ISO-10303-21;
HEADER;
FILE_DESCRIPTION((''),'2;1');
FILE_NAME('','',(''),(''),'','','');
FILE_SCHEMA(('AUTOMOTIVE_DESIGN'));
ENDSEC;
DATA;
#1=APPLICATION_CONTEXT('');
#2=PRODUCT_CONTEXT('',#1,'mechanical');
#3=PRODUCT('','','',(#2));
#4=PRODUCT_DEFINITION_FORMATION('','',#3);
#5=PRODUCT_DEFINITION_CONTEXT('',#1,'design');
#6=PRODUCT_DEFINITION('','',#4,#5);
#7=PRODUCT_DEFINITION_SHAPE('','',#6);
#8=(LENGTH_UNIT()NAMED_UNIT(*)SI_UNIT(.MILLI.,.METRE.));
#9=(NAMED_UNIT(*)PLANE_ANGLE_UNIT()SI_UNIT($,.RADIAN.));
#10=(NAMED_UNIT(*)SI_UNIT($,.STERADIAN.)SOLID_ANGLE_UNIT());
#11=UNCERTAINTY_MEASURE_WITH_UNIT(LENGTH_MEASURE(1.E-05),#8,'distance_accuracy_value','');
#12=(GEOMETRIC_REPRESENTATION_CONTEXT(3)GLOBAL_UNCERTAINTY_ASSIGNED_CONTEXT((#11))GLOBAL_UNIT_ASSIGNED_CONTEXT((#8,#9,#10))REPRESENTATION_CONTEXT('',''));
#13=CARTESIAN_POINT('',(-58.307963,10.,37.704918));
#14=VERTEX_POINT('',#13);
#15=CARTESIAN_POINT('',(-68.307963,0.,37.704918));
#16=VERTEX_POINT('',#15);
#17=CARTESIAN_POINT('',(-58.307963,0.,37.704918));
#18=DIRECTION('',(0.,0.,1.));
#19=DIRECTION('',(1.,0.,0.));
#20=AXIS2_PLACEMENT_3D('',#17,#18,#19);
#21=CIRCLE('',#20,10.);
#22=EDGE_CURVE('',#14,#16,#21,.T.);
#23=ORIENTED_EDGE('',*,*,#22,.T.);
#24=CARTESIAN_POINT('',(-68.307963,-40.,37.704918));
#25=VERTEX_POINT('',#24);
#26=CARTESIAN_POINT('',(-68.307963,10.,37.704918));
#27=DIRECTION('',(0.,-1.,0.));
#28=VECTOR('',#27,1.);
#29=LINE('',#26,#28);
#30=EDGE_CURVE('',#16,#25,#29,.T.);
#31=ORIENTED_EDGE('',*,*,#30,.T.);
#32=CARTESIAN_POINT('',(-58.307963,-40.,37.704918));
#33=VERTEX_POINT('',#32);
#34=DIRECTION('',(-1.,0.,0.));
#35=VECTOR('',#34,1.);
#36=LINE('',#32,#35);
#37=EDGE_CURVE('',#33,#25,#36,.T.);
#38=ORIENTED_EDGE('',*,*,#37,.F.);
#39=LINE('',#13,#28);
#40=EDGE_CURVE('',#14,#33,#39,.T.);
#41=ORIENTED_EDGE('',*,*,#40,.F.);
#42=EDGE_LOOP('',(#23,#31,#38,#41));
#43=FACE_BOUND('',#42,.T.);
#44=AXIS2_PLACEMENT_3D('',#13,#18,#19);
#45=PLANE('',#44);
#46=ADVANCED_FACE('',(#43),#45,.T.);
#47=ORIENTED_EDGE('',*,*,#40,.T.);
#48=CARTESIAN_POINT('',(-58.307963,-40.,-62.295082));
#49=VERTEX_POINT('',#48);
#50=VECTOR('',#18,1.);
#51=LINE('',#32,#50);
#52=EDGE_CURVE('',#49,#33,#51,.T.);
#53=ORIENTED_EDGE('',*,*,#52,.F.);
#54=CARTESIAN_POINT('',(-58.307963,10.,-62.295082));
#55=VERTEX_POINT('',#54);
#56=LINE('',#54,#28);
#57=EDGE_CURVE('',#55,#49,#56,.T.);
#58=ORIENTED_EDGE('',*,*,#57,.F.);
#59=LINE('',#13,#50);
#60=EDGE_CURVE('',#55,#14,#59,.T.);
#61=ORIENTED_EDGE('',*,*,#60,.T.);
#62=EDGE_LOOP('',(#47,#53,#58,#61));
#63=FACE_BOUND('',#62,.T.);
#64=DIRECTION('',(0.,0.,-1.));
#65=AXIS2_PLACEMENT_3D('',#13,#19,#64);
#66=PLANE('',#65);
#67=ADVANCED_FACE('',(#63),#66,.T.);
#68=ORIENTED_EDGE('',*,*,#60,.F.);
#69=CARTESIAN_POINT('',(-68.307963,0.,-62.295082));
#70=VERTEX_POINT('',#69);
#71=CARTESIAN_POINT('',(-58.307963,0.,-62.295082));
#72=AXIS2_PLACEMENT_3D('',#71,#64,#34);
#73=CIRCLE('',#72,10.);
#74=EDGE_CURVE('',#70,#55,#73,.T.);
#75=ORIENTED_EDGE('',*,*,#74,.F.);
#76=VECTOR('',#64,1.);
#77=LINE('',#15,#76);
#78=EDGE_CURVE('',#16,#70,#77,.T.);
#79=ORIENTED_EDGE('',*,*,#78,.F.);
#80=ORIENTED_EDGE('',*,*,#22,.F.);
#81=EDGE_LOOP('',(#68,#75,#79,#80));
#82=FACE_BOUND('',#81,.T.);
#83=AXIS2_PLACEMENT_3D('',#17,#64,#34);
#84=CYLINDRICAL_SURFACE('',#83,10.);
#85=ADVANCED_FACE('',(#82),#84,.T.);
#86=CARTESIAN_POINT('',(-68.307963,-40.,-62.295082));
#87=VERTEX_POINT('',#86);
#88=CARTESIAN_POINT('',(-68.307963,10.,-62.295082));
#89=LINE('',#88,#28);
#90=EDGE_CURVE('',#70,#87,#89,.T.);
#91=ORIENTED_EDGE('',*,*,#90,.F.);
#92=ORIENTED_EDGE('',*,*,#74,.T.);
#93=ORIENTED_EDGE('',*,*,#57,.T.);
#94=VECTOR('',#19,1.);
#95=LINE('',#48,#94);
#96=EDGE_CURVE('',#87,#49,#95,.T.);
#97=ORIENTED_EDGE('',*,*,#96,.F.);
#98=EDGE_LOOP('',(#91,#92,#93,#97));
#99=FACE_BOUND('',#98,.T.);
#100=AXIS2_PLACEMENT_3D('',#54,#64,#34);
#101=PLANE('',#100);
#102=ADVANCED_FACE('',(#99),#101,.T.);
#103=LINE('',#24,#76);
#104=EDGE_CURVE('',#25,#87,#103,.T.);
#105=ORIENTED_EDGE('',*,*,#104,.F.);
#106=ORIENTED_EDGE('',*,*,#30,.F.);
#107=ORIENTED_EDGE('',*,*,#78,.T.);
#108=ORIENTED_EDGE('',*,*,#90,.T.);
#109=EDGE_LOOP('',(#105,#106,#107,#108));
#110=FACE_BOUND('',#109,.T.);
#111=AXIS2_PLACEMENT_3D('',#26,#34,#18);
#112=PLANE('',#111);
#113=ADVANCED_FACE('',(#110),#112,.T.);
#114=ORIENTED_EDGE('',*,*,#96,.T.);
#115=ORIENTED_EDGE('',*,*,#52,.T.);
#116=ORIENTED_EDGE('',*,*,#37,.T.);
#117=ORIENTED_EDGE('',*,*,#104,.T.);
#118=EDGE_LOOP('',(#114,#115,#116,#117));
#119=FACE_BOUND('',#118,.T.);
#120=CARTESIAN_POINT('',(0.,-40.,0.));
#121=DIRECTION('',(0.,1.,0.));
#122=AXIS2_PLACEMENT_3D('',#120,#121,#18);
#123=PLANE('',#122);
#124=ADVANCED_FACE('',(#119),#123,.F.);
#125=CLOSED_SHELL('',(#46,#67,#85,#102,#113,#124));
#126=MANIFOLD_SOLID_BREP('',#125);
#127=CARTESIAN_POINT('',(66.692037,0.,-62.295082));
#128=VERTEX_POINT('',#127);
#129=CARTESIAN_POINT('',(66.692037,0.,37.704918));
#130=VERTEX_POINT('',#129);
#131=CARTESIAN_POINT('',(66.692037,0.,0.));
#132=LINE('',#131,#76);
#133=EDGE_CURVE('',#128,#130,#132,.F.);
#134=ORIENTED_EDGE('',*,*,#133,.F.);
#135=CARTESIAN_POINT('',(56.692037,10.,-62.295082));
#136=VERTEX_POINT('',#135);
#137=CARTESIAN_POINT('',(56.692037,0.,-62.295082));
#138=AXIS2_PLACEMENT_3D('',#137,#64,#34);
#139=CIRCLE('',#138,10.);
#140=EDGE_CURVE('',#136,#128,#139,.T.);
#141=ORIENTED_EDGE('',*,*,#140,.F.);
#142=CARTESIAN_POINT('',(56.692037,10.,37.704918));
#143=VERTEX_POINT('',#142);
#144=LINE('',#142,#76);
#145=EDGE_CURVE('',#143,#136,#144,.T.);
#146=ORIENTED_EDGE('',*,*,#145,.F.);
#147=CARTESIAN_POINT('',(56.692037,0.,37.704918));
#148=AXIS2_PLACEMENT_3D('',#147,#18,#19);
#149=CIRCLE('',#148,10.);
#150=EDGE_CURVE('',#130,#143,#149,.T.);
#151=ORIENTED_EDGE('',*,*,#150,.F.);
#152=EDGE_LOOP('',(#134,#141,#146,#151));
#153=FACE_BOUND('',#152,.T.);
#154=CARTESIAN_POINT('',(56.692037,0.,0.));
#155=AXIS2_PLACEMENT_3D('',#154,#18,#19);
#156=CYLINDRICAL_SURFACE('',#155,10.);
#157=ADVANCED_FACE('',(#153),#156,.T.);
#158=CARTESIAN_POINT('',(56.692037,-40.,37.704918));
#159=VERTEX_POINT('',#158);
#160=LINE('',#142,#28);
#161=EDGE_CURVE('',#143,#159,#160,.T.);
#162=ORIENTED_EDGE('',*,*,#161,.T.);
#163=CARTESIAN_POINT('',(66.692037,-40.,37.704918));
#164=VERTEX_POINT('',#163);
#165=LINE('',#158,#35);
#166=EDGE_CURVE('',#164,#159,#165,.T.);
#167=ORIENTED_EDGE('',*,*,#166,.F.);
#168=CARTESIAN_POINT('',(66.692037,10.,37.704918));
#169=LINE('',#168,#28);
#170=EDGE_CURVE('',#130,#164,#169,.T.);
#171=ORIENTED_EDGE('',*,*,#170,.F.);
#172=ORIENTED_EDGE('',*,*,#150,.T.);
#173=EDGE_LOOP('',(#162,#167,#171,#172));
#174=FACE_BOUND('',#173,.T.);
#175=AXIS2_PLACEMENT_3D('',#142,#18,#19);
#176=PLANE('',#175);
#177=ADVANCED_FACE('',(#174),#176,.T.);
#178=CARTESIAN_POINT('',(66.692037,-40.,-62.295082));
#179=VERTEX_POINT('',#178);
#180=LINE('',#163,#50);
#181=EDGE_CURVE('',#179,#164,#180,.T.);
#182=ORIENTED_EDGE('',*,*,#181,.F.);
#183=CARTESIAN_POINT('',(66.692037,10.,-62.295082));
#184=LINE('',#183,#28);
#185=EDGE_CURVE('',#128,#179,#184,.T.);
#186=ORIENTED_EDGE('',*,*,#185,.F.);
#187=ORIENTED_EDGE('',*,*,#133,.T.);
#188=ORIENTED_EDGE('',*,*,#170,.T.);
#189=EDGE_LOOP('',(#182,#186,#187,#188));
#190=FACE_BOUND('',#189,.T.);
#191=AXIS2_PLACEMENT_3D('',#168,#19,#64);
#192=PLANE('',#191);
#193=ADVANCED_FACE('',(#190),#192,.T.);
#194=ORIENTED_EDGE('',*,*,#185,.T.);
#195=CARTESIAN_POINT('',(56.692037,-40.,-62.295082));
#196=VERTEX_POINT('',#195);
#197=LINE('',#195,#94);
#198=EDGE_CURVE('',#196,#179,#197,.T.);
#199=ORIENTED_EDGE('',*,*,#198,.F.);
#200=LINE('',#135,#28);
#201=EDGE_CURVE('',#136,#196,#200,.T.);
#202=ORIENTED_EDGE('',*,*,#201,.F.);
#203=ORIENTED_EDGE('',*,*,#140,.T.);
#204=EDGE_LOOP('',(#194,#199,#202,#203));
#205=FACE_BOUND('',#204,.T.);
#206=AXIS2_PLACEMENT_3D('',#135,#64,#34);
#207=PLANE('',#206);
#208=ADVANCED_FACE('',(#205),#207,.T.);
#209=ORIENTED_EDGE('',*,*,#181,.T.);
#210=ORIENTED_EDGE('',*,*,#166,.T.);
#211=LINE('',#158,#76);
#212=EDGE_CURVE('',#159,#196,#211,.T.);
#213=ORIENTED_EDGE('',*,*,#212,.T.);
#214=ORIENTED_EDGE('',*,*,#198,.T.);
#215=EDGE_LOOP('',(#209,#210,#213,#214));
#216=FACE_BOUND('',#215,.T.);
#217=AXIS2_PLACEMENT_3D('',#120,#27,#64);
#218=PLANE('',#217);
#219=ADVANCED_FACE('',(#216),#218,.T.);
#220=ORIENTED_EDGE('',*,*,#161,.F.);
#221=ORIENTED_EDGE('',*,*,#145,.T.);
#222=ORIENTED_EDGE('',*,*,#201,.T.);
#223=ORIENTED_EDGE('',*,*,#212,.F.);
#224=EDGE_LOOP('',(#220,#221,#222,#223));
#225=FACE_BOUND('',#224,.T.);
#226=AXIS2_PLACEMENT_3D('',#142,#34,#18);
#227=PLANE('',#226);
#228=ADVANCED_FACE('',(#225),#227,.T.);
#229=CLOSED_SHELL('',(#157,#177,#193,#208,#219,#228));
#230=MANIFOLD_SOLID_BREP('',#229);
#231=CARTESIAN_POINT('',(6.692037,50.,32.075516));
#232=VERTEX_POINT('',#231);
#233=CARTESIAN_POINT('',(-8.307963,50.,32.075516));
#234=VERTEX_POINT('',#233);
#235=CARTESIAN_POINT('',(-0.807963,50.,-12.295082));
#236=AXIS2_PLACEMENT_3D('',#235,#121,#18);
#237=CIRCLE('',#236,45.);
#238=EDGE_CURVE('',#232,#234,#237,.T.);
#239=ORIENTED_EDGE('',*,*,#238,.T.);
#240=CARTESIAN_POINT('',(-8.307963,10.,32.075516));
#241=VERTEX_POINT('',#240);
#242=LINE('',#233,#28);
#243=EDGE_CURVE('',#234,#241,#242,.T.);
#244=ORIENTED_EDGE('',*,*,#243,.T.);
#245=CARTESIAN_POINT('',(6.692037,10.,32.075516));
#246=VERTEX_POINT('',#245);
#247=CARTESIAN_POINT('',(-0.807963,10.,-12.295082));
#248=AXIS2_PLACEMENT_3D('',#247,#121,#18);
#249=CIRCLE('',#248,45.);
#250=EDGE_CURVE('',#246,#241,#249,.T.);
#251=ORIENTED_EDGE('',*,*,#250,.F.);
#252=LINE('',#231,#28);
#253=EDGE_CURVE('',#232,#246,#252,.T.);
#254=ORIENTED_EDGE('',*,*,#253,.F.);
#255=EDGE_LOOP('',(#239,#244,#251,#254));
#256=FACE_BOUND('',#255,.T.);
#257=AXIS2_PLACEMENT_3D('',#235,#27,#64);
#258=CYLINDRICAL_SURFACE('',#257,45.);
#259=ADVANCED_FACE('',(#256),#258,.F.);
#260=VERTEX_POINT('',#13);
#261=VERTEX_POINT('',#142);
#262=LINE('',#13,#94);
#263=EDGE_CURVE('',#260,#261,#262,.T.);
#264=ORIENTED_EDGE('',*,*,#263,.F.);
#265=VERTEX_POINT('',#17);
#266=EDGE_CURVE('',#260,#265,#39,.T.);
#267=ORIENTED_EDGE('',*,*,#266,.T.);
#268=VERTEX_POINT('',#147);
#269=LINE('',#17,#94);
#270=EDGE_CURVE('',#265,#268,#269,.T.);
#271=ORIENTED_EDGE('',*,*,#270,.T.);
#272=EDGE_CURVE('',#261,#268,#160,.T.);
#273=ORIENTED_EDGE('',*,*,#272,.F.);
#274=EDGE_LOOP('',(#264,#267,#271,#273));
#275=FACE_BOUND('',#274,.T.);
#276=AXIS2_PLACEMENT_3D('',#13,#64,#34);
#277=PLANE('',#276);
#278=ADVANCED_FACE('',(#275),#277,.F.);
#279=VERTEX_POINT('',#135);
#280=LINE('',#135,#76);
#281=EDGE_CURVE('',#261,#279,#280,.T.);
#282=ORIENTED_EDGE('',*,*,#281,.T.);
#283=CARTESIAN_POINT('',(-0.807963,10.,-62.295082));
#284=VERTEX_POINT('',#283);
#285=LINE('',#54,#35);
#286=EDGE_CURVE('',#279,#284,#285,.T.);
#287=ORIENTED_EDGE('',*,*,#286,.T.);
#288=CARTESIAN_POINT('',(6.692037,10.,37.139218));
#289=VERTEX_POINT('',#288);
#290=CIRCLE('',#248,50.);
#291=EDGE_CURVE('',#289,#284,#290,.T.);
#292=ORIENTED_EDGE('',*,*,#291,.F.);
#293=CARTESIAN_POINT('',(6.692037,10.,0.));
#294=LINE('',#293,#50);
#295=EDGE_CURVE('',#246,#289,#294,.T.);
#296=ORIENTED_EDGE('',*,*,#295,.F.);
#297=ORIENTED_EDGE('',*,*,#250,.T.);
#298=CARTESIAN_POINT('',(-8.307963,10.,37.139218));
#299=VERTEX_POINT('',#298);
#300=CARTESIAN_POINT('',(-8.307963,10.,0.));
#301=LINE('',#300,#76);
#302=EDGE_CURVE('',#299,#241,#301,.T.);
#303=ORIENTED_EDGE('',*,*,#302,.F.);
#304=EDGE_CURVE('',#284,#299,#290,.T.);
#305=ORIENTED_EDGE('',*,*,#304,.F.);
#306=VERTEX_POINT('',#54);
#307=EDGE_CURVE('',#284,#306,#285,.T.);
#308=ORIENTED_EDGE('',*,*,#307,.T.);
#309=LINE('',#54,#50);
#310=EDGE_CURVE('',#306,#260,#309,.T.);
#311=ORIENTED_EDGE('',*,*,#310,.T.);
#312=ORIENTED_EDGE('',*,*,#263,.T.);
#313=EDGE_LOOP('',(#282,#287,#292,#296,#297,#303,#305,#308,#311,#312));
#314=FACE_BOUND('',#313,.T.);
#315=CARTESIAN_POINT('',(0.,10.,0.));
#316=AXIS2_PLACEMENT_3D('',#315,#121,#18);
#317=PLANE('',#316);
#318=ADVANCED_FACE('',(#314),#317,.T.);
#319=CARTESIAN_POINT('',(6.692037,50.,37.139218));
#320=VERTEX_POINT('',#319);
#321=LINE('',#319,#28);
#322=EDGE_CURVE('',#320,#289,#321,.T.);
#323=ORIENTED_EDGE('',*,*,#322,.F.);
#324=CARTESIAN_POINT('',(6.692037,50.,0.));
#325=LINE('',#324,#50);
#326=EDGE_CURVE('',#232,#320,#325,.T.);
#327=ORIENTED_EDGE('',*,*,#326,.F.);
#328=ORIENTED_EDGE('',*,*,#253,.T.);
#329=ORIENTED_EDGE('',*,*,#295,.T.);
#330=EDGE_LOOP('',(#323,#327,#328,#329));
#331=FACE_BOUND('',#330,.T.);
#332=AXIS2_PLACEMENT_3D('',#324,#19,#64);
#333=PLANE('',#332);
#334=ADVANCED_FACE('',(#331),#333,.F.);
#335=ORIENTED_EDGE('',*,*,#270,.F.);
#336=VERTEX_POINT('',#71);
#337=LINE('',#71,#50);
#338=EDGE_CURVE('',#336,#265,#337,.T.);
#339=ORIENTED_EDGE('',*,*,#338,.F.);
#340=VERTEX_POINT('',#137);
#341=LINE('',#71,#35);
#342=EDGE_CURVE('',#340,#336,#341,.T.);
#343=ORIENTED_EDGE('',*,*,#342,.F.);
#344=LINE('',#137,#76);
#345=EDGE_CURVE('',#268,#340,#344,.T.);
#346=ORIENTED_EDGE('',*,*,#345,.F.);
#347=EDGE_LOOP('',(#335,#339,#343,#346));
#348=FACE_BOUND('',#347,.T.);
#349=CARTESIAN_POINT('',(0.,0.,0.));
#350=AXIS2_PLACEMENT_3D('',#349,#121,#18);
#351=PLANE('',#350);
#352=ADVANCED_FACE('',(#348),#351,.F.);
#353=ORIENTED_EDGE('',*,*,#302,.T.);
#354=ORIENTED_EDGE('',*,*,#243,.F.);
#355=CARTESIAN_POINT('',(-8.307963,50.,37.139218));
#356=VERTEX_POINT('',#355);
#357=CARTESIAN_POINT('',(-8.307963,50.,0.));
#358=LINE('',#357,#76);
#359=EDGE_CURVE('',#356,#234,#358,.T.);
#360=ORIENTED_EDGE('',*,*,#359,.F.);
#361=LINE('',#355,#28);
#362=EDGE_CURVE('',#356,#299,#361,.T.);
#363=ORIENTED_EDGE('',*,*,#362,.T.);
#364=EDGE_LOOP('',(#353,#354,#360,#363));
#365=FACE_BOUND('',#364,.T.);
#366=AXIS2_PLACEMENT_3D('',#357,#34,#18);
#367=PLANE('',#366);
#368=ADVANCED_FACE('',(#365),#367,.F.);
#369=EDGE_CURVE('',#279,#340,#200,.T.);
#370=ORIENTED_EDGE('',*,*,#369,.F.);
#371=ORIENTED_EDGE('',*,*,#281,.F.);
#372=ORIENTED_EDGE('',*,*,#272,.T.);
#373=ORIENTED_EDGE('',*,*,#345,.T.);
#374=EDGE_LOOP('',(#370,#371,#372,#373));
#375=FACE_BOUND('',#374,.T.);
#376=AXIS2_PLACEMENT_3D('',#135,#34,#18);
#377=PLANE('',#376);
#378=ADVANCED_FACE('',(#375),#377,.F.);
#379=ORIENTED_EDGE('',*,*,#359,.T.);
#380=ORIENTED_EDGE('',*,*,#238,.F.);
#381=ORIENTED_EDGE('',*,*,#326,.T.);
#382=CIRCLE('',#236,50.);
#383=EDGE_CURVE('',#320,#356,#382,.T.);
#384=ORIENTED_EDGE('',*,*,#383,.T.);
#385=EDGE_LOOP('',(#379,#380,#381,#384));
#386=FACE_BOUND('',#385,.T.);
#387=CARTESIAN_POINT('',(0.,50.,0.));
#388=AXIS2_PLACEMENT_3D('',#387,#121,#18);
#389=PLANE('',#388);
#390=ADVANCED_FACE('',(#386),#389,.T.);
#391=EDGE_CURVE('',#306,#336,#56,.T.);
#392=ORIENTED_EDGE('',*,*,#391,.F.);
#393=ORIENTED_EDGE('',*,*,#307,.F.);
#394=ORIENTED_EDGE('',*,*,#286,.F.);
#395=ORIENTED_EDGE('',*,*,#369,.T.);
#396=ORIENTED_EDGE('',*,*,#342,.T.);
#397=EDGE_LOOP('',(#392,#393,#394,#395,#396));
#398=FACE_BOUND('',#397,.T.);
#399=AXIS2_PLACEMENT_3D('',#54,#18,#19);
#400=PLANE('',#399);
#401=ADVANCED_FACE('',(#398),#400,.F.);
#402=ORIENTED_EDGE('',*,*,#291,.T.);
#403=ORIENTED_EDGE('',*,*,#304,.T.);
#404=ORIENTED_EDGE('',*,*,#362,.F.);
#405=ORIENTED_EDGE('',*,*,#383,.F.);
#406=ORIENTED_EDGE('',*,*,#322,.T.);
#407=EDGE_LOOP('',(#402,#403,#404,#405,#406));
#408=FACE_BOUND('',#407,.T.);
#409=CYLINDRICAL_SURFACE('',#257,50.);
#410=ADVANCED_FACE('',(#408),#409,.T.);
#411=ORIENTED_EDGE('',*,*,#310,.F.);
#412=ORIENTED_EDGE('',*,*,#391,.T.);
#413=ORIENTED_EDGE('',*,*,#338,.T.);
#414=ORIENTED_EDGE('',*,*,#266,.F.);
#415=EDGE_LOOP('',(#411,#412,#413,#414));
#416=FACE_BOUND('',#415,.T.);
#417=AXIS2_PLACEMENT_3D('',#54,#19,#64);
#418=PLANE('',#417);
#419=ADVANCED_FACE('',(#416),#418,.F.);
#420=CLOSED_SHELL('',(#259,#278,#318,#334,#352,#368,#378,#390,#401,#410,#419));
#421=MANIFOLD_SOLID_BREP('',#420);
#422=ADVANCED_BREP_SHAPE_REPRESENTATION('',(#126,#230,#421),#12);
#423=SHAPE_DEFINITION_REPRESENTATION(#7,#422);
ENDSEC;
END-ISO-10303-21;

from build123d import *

# Parameters (mm, degrees)
SOCLE_W                                        = 115
SOCLE_H                                        = 100
EXTRUSION_DU_SOCLE_DEPTH                       = 10
EXTRUSION_DES_FIXATIONS_LAT_RALES_DEPTH        = 40
EXTRUSION_DES_FIXATIONS_LAT_RALES_DEPTH_BACK   = 10
FIXATIONS_LAT_RALES_W                          = 10
FIXATIONS_LAT_RALES_H                          = 100
EXTRUSION_DES_FIXATIONS_LAT_RALES_2_DEPTH      = 40
EXTRUSION_DES_FIXATIONS_LAT_RALES_2_DEPTH_BACK = 10
CONG_FIXATION_GAUCHE_R                         = 10
CONG_FIXATION_DROITE_R                         = 10
EXTRUSION_FIXATION_TASSE_DEPTH                 = 40


with BuildPart() as part:
    # socle → extrusion du socle (new body)
    with BuildSketch(Plane(origin=(0, 0, 0), x_dir=(1, 0, 0), z_dir=(0, 1, 0))):
        with Locations((-0.807962529, 12.295081967)):
            Rectangle(SOCLE_W, SOCLE_H)
    extrude(amount=EXTRUSION_DU_SOCLE_DEPTH)

    # socle tasse → extrusion fixation tasse (add)
    with BuildSketch(Plane(origin=(0, 10, 0), x_dir=(1, 0, 0), z_dir=(0, 1, 0))):
        with BuildLine():
            ThreePointArc((6.692037471, -37.139217866), (-0.807962529, 62.295081967), (-8.307962529, -37.139217866))
            Line((-8.307962529, -37.139217866), (-8.307962529, -32.075516406))
            ThreePointArc((-8.307962529, -32.075516406), (-0.807962529, 57.295081967), (6.692037471, -32.075516406))
            Line((6.692037471, -32.075516406), (6.692037471, -37.139217866))
        make_face()
    extrude(amount=EXTRUSION_FIXATION_TASSE_DEPTH)


with BuildPart() as body_2:
    # fixations latérales → extrusion des fixations latérales (new, two sides: drawn at the far end of the back side and taken through both)
    with BuildSketch(Plane.XZ.offset(-EXTRUSION_DES_FIXATIONS_LAT_RALES_DEPTH_BACK)):
        with Locations((-63.307962529, -12.295081967)):
            Rectangle(FIXATIONS_LAT_RALES_W, FIXATIONS_LAT_RALES_H)
    extrude(amount=EXTRUSION_DES_FIXATIONS_LAT_RALES_DEPTH + EXTRUSION_DES_FIXATIONS_LAT_RALES_DEPTH_BACK)

    # congé fixation gauche
    cong_fixation_gauche_edges = [body_2.edges().sort_by_distance(p)[0] for p in [
        (-68.307962529, 10, -12.295081967),
    ]]
    fillet(cong_fixation_gauche_edges, radius=CONG_FIXATION_GAUCHE_R - 0.0001)  # a hair under: the kernel refuses the full size


with BuildPart() as body_3:
    # fixations latérales → extrusion des fixations lat_rales 2 (new, two sides: drawn at the far end of the back side and taken through both)
    with BuildSketch(Plane.XZ.offset(-EXTRUSION_DES_FIXATIONS_LAT_RALES_2_DEPTH_BACK)):
        with Locations((61.692037471, -12.295081967)):
            Rectangle(FIXATIONS_LAT_RALES_W, FIXATIONS_LAT_RALES_H)
    extrude(amount=EXTRUSION_DES_FIXATIONS_LAT_RALES_2_DEPTH + EXTRUSION_DES_FIXATIONS_LAT_RALES_2_DEPTH_BACK)

    # congé fixation droite
    cong_fixation_droite_edges = [body_3.edges().sort_by_distance(p)[0] for p in [
        (66.692037471, 10, -12.295081967),
    ]]
    fillet(cong_fixation_droite_edges, radius=CONG_FIXATION_DROITE_R - 0.0001)  # a hair under: the kernel refuses the full size


solid = Compound([part.part, body_2.part, body_3.part])
